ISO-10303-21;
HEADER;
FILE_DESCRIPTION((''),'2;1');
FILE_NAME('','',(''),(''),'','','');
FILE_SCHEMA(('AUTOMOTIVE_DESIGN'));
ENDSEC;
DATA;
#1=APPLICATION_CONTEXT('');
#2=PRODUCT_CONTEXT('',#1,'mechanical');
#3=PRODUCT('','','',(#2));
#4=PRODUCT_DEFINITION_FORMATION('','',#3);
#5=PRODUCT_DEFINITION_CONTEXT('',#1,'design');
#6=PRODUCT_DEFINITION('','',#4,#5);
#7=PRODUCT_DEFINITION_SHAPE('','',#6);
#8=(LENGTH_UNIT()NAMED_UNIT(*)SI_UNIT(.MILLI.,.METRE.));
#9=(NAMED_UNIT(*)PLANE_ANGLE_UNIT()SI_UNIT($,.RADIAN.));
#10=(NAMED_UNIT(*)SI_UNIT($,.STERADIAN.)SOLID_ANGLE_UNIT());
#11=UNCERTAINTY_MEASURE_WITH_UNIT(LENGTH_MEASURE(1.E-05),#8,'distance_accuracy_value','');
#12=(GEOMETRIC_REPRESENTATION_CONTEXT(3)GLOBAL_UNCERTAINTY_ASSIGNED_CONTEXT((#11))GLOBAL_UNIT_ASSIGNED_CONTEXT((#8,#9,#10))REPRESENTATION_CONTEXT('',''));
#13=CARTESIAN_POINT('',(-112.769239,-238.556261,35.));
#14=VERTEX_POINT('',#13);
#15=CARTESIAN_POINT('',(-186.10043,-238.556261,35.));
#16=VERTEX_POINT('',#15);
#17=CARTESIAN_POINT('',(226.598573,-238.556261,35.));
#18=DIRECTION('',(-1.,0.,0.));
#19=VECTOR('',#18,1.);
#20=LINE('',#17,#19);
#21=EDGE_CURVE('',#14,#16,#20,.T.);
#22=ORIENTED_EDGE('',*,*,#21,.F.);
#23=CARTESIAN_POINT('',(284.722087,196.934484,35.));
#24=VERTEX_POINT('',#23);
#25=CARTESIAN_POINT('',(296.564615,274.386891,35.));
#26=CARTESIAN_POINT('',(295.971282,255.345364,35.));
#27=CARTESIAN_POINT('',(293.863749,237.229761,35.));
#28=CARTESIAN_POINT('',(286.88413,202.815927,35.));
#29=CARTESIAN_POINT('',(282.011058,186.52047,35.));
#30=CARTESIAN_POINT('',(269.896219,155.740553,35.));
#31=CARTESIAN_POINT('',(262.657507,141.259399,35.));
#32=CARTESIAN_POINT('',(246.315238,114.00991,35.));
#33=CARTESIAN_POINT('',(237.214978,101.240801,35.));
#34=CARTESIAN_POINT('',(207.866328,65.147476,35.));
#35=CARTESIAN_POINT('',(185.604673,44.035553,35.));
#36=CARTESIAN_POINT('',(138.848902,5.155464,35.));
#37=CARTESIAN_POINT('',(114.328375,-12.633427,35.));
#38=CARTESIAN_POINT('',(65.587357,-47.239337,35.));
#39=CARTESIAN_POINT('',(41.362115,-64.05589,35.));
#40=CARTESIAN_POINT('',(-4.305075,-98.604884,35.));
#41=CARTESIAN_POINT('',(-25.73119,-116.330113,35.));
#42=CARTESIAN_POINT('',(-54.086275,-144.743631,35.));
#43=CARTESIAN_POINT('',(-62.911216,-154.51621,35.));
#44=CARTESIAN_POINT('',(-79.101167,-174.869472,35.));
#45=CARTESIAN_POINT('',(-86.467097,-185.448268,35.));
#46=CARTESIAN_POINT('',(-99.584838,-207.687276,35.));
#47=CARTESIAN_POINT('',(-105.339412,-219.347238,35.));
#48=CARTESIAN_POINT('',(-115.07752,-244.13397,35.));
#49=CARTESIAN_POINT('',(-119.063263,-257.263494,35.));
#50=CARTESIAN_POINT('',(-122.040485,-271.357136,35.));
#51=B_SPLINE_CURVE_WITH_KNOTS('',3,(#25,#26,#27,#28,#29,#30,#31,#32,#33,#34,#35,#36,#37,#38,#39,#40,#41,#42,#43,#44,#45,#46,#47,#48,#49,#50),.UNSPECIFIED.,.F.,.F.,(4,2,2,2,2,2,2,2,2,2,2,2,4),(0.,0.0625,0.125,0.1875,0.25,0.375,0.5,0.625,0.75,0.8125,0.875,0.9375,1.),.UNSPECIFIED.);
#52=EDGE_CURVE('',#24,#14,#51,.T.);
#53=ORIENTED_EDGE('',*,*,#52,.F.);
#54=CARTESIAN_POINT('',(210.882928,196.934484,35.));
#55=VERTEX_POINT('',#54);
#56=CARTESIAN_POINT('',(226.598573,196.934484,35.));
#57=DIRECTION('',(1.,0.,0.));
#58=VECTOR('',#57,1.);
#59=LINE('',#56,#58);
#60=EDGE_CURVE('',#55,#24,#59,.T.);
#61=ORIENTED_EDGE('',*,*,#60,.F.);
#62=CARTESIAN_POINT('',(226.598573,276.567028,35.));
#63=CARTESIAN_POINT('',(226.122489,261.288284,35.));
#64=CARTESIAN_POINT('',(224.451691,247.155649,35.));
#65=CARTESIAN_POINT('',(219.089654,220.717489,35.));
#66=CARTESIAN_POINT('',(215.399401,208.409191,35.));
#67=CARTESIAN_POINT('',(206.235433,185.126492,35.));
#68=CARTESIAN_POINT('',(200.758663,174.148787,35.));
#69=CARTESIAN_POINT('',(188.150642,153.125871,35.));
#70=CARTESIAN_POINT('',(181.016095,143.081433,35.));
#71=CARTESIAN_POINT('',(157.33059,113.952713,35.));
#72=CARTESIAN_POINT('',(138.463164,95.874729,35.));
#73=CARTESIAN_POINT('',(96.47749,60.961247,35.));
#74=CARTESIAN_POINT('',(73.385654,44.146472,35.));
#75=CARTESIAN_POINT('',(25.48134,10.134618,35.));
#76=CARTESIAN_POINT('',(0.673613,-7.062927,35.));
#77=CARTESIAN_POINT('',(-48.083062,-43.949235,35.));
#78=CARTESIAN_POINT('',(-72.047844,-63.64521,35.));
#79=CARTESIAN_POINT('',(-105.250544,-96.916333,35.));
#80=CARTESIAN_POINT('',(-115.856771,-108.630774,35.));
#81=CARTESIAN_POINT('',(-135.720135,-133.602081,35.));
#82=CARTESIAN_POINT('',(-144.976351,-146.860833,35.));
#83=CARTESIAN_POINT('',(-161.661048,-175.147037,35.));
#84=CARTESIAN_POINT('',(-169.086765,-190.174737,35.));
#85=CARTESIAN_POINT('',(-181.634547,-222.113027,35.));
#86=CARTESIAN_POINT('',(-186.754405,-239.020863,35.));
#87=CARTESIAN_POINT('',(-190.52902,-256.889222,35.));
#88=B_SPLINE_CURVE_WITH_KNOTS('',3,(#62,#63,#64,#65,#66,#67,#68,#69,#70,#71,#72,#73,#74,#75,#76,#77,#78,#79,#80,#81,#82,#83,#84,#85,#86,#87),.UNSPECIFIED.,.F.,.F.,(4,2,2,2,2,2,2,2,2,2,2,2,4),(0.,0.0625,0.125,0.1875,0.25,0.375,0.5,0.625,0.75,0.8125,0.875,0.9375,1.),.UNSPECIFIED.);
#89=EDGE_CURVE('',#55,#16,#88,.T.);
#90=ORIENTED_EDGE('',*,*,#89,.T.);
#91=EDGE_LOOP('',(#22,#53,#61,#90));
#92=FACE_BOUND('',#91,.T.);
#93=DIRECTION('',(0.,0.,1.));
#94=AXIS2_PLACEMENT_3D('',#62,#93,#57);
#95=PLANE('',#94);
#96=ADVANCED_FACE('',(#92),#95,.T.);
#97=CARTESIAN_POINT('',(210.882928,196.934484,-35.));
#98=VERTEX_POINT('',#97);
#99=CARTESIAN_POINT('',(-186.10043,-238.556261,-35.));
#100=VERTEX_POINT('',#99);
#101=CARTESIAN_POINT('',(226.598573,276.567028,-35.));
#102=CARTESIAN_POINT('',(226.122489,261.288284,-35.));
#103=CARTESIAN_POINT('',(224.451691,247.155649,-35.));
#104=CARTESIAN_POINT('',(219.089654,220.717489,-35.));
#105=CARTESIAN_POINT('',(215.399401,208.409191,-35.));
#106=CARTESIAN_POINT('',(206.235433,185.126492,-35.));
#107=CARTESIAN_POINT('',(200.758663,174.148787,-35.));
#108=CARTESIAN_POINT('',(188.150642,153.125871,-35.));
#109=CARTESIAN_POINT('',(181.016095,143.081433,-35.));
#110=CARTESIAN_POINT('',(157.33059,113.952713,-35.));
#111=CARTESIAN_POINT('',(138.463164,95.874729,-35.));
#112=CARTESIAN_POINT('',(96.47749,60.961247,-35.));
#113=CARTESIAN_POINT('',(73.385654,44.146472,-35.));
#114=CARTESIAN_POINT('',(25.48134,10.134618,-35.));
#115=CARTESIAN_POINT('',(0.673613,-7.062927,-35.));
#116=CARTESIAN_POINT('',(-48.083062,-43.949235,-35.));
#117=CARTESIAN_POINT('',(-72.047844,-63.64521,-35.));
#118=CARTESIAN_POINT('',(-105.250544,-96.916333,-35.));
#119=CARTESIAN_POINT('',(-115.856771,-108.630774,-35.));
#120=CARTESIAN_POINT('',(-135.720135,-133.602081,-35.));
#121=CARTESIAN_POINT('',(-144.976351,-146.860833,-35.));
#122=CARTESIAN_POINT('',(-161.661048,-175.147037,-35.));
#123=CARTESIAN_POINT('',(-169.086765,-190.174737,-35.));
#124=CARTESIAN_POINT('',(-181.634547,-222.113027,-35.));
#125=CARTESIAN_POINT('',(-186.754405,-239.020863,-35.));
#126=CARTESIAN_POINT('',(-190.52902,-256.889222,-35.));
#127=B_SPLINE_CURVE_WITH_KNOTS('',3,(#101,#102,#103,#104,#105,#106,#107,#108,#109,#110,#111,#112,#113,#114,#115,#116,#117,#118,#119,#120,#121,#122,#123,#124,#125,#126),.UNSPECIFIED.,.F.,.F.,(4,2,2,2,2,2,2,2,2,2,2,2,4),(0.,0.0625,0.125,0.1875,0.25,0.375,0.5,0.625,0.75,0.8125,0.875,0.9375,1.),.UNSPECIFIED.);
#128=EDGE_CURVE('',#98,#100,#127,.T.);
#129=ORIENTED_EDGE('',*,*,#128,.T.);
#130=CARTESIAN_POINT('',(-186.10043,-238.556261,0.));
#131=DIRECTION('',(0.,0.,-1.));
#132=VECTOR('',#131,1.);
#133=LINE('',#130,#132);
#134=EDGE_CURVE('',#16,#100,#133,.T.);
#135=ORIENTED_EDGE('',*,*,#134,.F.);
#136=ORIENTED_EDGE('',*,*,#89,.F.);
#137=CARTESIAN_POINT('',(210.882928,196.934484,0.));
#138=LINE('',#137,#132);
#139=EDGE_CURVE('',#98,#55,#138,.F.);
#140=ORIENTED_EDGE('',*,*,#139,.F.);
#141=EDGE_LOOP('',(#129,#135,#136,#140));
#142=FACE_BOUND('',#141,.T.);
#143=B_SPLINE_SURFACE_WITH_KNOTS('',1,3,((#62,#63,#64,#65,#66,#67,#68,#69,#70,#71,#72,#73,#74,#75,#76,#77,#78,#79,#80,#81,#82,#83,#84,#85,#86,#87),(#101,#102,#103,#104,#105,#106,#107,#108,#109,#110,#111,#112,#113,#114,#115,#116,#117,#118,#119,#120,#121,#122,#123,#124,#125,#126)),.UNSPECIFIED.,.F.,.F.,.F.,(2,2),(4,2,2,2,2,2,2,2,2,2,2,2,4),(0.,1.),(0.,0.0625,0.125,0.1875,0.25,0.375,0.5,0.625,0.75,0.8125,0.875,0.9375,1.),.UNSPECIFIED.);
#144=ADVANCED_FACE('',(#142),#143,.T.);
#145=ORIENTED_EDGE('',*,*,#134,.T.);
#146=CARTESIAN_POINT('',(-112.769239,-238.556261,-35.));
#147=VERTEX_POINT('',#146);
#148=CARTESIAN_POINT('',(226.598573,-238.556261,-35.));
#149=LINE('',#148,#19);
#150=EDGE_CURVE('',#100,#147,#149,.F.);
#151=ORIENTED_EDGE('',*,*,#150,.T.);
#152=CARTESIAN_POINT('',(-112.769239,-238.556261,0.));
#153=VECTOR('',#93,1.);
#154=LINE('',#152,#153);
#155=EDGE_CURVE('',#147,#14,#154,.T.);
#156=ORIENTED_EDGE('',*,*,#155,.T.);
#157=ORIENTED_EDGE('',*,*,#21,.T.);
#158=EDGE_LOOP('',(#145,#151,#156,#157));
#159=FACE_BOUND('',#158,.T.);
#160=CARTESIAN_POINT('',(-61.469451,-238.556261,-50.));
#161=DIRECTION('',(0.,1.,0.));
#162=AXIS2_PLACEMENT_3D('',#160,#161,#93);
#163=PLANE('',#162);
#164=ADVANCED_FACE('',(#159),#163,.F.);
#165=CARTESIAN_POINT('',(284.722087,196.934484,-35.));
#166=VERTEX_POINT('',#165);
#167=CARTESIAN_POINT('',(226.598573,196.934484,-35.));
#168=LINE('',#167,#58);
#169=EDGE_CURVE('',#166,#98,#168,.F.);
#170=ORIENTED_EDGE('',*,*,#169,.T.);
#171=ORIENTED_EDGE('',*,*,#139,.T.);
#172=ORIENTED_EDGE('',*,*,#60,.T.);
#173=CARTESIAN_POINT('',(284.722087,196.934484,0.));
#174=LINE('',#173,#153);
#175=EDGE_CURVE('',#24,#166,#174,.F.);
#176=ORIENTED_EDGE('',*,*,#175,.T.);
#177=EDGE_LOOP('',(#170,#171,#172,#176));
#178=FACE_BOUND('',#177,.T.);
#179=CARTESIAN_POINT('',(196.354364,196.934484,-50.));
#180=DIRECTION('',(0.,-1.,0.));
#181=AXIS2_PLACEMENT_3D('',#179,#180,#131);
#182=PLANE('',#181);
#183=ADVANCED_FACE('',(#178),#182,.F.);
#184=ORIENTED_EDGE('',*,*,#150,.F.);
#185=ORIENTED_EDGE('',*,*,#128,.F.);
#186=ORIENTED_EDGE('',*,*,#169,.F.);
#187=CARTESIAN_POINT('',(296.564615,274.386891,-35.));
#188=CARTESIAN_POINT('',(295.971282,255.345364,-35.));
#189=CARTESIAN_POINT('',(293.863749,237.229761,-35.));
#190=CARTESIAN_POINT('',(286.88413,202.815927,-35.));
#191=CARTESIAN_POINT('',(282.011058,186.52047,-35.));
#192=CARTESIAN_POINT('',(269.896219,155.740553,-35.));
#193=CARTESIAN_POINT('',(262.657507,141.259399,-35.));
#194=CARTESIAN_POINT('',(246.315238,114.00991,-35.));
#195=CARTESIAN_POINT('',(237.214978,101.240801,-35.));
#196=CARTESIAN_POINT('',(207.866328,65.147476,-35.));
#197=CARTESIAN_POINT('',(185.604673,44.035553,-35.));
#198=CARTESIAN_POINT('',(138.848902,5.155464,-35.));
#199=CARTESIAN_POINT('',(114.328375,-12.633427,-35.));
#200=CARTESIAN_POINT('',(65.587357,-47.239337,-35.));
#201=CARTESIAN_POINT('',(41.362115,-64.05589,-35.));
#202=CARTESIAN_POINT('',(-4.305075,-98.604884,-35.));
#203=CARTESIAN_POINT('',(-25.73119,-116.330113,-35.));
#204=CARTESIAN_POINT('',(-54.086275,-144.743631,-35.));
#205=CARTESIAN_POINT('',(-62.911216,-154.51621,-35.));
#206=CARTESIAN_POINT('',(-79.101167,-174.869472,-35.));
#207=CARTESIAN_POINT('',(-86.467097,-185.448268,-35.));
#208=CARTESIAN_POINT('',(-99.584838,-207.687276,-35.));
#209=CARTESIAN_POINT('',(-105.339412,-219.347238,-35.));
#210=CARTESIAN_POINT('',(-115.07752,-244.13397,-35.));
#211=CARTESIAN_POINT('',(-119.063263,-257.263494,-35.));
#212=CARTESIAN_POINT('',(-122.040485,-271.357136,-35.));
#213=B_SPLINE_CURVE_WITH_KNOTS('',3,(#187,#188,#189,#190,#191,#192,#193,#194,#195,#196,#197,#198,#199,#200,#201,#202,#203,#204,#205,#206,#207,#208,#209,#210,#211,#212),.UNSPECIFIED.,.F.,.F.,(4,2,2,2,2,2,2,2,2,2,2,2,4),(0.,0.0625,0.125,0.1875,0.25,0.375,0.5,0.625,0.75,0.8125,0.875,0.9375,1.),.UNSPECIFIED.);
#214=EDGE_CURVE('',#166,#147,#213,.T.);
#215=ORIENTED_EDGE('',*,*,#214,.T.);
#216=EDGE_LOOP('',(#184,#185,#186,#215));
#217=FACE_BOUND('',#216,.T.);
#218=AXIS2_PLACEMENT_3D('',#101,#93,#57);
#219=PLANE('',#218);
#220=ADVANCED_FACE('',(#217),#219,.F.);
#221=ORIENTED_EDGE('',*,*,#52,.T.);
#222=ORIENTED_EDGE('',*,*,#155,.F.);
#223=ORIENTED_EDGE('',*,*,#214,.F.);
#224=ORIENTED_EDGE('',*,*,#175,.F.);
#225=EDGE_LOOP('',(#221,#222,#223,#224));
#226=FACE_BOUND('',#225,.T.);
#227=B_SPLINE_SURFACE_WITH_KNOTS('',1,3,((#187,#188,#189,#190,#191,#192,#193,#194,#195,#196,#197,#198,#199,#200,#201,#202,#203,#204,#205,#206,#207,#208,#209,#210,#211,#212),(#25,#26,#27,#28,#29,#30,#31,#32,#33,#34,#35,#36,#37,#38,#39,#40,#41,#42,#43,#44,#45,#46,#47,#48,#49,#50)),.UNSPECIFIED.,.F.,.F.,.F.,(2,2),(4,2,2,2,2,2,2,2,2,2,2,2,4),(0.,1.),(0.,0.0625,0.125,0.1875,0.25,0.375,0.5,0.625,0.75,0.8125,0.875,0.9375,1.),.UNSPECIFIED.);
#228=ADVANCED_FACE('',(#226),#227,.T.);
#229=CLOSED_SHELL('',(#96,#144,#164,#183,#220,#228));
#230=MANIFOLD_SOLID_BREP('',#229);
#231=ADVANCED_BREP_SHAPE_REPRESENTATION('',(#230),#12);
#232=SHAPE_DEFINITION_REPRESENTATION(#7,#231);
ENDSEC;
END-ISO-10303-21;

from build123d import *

# Parameters (mm, degrees)
SWEEP_START         = -35
SWEEP_1_DEPTH       = 70
CUT_EXTRUDE_2_DEPTH = 50
SKETCH_5_W          = 140.372929197
SKETCH_5_H          = 70.259224127
CUT_EXTRUDE_3_DEPTH = 50


# Read off the part's stored shape, not the designer's step: 扫描1
with BuildPart() as part:
    # 扫描1 outline → 扫描1 (new body)
    with BuildSketch(Plane.XY.offset(SWEEP_START)):
        with BuildLine():
            Line((296.564615022, 274.38689053), (226.598573257, 276.567028069))
            add(Edge.make_bspline(
                [(226.598573257, 276.567028069), (226.122488542, 261.288284191), (224.451690955, 247.155649258), (219.089653574, 220.717489302), (215.399401116, 208.40919063), (206.235433473, 185.12649183), (200.758662752, 174.148786785), (188.150641595, 153.125870735), (181.016094816, 143.081433196), (157.330590321, 113.952712829), (138.463163827, 95.874728611), (96.477489777, 60.961246529), (73.38565364, 44.146471525), (25.481340147, 10.134618125), (0.673613184, -7.062926968), (-48.083061525, -43.949235156), (-72.047844266, -63.645210456), (-105.25054385, -96.916333242), (-115.856771287, -108.630774221), (-135.720134821, -133.60208084), (-144.976351275, -146.860833281), (-161.661047766, -175.147036825), (-169.086764703, -190.174737104), (-181.634547375, -222.113027169), (-186.754405107, -239.020863028), (-190.52902045, -256.889221865)],
                knots=[0, 0, 0, 0, 0.0625, 0.0625, 0.125, 0.125, 0.1875, 0.1875, 0.25, 0.25, 0.375, 0.375, 0.5, 0.5, 0.625, 0.625, 0.75, 0.75, 0.8125, 0.8125, 0.875, 0.875, 0.9375, 0.9375, 1, 1, 1, 1], degree=3))
            Line((-190.52902045, -256.889221865), (-122.040485139, -271.357135708))
            add(Edge.make_bspline(
                [(296.564615022, 274.38689053), (295.971282235, 255.345364054), (293.863748523, 237.229761394), (286.884130269, 202.815927489), (282.011058386, 186.520469888), (269.896218843, 155.740553252), (262.657506721, 141.259399135), (246.315238227, 114.009909757), (237.214978199, 101.240801032), (207.866328138, 65.147475641), (185.60467275, 44.035553396), (138.848901666, 5.155463629), (114.32837455, -12.633426756), (65.587356502, -47.239336738), (41.362115165, -64.055889638), (-4.305075435, -98.604883731), (-25.731189713, -116.330112712), (-54.086274953, -144.743631325), (-62.911215673, -154.516209977), (-79.101167015, -174.869471819), (-86.467097278, -185.448268211), (-99.58483824, -207.687275741), (-105.339412039, -219.347237708), (-115.077520317, -244.133969753), (-119.063262798, -257.263493763), (-122.040485139, -271.357135708)],
                knots=[0, 0, 0, 0, 0.0625, 0.0625, 0.125, 0.125, 0.1875, 0.1875, 0.25, 0.25, 0.375, 0.375, 0.5, 0.5, 0.625, 0.625, 0.75, 0.75, 0.8125, 0.8125, 0.875, 0.875, 0.9375, 0.9375, 1, 1, 1, 1], degree=3))
        make_face()
    extrude(amount=SWEEP_1_DEPTH)

    # 草图4 → 切除-拉伸2 (cut, symmetric)
    with BuildSketch(Plane.XY):
        Polygon((196.354363501, 196.934484181), (331.188865509, 196.934484181), (331.188865509, 351.743238219), (86.208590838, 351.743238219), align=None)
    extrude(amount=CUT_EXTRUDE_2_DEPTH, both=True, mode=Mode.SUBTRACT)

    # 草图5 → 切除-拉伸3 (cut, symmetric)
    with BuildSketch(Plane.XY):
        with Locations((-131.655915803, -273.68587269)):
            Rectangle(SKETCH_5_W, SKETCH_5_H)
    extrude(amount=CUT_EXTRUDE_3_DEPTH, both=True, mode=Mode.SUBTRACT)


solid = part.part
